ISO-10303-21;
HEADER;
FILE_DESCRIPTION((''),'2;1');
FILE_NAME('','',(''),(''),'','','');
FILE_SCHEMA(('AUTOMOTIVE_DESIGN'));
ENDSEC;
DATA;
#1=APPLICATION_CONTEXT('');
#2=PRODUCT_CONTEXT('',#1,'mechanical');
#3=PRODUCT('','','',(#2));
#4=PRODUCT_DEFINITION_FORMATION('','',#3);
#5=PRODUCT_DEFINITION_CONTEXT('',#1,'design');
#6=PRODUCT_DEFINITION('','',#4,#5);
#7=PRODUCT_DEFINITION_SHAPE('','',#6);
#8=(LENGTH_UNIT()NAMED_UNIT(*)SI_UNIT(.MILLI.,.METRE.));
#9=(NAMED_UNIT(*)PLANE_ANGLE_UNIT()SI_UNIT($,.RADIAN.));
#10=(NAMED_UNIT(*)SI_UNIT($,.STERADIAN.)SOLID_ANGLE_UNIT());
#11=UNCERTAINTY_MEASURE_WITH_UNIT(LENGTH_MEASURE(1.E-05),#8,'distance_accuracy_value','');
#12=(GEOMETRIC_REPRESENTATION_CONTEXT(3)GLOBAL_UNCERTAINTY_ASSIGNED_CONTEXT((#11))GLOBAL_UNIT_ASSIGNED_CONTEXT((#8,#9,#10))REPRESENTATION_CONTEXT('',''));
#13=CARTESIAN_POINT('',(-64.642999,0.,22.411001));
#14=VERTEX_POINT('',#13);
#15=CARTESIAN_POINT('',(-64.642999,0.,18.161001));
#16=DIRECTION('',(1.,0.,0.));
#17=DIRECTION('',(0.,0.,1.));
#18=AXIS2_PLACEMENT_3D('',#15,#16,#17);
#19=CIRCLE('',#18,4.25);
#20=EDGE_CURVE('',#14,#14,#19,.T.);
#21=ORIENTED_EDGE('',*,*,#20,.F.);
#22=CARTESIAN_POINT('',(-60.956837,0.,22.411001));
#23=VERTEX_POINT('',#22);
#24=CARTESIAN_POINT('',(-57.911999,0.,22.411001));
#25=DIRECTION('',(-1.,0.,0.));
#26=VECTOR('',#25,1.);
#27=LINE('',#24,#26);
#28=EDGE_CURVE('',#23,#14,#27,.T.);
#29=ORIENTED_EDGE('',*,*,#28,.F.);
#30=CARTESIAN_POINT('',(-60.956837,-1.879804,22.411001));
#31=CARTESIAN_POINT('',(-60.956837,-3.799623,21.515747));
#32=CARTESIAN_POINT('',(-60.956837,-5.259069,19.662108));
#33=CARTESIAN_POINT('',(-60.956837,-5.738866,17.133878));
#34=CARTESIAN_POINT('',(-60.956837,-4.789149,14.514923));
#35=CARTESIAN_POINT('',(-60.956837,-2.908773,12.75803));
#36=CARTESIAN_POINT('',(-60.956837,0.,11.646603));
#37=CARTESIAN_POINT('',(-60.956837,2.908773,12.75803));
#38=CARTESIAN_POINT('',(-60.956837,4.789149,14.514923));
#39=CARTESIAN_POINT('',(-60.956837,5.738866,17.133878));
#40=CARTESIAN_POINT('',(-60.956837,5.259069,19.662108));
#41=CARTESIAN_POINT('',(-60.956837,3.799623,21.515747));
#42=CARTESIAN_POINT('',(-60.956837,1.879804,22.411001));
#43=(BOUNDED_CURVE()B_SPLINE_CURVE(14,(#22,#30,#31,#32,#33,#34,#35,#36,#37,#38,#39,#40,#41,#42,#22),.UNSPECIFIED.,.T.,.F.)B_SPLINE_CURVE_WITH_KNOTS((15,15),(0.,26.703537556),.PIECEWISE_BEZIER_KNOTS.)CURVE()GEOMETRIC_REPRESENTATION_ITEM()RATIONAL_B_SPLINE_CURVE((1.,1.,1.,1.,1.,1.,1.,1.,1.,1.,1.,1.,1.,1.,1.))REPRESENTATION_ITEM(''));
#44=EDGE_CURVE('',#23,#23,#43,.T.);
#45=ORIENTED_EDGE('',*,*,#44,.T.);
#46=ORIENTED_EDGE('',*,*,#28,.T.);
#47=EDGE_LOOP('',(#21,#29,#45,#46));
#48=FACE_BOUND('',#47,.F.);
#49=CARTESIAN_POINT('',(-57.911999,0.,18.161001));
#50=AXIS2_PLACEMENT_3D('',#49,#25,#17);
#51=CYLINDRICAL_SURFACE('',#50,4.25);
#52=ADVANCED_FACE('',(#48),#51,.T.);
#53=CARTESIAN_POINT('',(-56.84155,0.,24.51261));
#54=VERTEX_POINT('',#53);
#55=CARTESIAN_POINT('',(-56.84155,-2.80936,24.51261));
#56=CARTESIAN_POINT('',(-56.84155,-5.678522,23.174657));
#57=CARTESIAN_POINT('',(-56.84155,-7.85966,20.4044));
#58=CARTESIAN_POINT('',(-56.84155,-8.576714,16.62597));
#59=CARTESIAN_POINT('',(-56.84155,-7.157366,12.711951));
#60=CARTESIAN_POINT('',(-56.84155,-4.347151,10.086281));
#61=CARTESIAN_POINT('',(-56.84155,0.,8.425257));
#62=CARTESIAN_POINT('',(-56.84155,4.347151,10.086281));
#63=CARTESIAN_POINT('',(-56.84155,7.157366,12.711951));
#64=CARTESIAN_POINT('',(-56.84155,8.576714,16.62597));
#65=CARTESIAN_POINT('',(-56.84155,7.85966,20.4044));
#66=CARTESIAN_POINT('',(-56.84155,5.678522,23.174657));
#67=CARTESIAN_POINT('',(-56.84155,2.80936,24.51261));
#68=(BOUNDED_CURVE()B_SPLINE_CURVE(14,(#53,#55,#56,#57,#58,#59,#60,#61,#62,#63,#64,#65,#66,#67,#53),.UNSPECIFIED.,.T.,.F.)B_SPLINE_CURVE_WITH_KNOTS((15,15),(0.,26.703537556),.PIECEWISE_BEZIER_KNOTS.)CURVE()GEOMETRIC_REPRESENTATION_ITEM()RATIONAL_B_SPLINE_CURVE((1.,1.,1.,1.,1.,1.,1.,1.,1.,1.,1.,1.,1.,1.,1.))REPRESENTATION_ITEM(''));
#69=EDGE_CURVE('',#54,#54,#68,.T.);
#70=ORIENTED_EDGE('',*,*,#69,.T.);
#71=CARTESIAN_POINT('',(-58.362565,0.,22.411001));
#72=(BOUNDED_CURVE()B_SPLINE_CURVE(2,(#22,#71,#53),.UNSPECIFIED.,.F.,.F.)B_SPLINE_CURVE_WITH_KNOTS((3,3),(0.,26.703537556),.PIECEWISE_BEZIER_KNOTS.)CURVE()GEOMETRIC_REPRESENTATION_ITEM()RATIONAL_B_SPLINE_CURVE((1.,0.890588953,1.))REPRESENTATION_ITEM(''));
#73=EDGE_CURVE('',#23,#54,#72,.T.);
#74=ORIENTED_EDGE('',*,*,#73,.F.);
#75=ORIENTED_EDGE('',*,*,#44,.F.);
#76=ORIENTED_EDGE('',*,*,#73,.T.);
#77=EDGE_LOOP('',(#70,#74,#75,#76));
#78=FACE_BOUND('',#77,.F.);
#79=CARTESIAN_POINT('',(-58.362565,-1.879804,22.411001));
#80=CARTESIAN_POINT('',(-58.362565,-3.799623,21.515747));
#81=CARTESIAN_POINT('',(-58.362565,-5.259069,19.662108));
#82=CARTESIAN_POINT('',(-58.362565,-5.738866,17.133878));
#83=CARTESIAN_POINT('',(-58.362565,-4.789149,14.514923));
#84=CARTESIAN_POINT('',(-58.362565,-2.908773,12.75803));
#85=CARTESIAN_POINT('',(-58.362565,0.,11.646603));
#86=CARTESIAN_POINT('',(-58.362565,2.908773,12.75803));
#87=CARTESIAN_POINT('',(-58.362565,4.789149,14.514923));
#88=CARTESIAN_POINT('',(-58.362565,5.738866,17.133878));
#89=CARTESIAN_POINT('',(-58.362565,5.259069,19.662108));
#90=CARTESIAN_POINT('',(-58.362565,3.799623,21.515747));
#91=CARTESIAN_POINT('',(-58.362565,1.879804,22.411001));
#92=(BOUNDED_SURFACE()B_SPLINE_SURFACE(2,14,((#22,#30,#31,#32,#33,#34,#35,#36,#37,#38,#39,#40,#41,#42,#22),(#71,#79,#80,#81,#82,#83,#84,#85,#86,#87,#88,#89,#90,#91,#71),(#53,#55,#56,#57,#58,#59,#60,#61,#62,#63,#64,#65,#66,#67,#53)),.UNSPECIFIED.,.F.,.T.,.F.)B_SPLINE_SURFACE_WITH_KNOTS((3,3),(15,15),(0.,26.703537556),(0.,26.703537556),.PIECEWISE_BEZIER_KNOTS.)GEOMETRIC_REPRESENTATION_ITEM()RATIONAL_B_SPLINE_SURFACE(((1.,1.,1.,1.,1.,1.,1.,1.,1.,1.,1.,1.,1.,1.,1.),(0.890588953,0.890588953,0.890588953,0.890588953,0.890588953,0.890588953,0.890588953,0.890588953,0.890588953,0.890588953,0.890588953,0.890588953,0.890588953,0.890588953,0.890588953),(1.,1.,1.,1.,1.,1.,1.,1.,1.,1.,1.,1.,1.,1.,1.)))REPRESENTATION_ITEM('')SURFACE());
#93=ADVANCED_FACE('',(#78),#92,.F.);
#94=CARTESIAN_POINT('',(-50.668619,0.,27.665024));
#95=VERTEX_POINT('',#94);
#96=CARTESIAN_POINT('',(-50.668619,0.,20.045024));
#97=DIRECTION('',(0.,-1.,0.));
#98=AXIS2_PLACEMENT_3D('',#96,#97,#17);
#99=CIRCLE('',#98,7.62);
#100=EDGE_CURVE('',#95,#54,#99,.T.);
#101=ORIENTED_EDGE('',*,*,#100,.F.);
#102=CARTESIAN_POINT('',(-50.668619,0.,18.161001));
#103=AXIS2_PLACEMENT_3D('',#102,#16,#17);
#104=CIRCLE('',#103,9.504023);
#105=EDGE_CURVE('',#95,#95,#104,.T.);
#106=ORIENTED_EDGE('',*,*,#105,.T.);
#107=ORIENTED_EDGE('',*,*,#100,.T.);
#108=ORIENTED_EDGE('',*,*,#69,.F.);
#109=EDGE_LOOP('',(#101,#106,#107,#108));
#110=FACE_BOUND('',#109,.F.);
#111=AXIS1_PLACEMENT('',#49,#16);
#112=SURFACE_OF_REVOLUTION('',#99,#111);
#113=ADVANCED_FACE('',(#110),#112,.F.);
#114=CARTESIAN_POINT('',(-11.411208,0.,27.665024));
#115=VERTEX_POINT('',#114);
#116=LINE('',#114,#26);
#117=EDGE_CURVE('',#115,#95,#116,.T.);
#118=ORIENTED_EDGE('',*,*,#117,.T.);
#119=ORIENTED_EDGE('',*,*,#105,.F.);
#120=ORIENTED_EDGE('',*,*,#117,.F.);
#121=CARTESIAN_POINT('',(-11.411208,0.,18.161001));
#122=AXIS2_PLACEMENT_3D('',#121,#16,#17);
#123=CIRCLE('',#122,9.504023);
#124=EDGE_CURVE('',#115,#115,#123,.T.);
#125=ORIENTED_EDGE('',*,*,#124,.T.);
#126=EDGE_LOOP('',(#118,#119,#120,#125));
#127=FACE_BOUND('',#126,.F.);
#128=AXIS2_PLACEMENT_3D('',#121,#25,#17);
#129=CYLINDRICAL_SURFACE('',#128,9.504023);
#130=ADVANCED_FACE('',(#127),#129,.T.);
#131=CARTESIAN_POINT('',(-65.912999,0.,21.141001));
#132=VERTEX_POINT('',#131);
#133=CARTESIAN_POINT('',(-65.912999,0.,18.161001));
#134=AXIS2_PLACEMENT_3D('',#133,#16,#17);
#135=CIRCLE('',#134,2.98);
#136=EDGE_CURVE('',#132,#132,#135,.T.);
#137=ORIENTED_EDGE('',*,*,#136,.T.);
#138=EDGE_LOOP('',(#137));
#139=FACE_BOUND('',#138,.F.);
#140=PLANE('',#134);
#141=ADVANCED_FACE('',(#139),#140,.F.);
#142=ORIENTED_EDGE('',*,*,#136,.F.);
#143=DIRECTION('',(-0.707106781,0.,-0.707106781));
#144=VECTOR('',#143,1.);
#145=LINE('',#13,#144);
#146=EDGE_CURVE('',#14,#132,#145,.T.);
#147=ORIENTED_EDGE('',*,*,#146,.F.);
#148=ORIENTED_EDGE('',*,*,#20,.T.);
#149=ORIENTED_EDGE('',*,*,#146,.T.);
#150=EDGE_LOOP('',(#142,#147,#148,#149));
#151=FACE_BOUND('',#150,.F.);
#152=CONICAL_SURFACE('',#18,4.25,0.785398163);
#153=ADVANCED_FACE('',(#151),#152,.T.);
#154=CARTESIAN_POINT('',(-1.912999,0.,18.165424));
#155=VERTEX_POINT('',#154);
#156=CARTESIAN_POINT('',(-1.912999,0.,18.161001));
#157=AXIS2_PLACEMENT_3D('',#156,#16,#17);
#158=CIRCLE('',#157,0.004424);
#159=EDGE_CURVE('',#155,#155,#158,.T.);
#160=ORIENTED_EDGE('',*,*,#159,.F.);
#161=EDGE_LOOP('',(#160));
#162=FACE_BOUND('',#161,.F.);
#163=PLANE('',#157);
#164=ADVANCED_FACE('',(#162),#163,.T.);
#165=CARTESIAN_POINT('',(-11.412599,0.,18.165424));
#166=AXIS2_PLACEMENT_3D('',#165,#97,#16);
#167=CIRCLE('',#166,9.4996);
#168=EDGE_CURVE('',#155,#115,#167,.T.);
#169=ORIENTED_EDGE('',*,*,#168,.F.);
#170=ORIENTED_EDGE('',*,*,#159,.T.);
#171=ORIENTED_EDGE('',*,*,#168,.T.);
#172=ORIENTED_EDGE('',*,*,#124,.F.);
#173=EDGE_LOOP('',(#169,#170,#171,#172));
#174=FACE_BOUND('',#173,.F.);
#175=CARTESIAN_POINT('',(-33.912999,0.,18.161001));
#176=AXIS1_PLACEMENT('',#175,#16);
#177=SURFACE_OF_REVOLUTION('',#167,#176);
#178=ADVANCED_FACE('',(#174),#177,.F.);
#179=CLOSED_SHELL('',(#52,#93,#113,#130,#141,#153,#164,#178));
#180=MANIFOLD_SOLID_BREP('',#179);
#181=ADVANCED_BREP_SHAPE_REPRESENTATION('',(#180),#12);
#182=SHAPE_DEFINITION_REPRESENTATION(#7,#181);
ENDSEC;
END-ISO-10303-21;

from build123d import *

# Parameters (mm, degrees)
F3_R    = 5.08
F4_SIZE = 1.27


# Not quite as in the source:
# - a fillet or chamfer that OpenCascade refuses, or shapes differently, is made with other operations: its cross-section is extruded or revolved along the edge and cut away or added


with BuildPart() as f1:
    # F0 (on Front) → F1 (revolve)
    with BuildSketch(Plane.XZ):
        with BuildLine():
            Line((-65.912999015, 22.4110006839), (-65.912999015, 18.1610006839))
            Line((-65.912999015, 18.1610006839), (-1.912999015, 18.1610006839))
            Line((-1.912999015, 18.1610006839), (-1.912999015, 18.1654242131))
            ThreePointArc((-1.912999015, 18.1654242131), (-4.6948756483, 24.8821639675), (-11.4112079773, 27.6650241112))
            Line((-11.4112079773, 27.6650241112), (-57.911999015, 27.6650241112))
            Line((-57.911999015, 27.6650241112), (-57.911999015, 22.4110006839))
            Line((-57.911999015, 22.4110006839), (-65.912999015, 22.4110006839))
        make_face()
    revolve(axis=Axis((-33.912999015, 0, 18.1610006839), (1, 0, 0)))

    # F2: fillet of radius 7.62 on 1 edges, made by hand

    # F2_s1 → F2_t2 (revolve, cut)
    with BuildSketch(Plane.XZ):
        with BuildLine():
            ThreePointArc((-50.6686189437, 27.6650241112), (-55.1427478263, 26.2132143435), (-57.911999015, 22.4110006839))
            Line((-57.911999015, 22.4110006839), (-57.911999015, 27.6650241112))
            Line((-57.911999015, 27.6650241112), (-50.6686189437, 27.6650241112))
        make_face()
    revolve(axis=Axis((-57.911999015, 0, 18.1610006839), (1, 0, 0)), mode=Mode.SUBTRACT)

    # F3
    f3_edges = [f1.edges().sort_by_distance(p)[0] for p in [
        (-57.911999, 0, 13.911001),
    ]]
    fillet(f3_edges, radius=F3_R)

    # F4
    f4_edges = [f1.edges().sort_by_distance(p)[0] for p in [
        (-65.912999, 0, 13.911001),
    ]]
    chamfer(f4_edges, length=F4_SIZE)


solid = f1.part
